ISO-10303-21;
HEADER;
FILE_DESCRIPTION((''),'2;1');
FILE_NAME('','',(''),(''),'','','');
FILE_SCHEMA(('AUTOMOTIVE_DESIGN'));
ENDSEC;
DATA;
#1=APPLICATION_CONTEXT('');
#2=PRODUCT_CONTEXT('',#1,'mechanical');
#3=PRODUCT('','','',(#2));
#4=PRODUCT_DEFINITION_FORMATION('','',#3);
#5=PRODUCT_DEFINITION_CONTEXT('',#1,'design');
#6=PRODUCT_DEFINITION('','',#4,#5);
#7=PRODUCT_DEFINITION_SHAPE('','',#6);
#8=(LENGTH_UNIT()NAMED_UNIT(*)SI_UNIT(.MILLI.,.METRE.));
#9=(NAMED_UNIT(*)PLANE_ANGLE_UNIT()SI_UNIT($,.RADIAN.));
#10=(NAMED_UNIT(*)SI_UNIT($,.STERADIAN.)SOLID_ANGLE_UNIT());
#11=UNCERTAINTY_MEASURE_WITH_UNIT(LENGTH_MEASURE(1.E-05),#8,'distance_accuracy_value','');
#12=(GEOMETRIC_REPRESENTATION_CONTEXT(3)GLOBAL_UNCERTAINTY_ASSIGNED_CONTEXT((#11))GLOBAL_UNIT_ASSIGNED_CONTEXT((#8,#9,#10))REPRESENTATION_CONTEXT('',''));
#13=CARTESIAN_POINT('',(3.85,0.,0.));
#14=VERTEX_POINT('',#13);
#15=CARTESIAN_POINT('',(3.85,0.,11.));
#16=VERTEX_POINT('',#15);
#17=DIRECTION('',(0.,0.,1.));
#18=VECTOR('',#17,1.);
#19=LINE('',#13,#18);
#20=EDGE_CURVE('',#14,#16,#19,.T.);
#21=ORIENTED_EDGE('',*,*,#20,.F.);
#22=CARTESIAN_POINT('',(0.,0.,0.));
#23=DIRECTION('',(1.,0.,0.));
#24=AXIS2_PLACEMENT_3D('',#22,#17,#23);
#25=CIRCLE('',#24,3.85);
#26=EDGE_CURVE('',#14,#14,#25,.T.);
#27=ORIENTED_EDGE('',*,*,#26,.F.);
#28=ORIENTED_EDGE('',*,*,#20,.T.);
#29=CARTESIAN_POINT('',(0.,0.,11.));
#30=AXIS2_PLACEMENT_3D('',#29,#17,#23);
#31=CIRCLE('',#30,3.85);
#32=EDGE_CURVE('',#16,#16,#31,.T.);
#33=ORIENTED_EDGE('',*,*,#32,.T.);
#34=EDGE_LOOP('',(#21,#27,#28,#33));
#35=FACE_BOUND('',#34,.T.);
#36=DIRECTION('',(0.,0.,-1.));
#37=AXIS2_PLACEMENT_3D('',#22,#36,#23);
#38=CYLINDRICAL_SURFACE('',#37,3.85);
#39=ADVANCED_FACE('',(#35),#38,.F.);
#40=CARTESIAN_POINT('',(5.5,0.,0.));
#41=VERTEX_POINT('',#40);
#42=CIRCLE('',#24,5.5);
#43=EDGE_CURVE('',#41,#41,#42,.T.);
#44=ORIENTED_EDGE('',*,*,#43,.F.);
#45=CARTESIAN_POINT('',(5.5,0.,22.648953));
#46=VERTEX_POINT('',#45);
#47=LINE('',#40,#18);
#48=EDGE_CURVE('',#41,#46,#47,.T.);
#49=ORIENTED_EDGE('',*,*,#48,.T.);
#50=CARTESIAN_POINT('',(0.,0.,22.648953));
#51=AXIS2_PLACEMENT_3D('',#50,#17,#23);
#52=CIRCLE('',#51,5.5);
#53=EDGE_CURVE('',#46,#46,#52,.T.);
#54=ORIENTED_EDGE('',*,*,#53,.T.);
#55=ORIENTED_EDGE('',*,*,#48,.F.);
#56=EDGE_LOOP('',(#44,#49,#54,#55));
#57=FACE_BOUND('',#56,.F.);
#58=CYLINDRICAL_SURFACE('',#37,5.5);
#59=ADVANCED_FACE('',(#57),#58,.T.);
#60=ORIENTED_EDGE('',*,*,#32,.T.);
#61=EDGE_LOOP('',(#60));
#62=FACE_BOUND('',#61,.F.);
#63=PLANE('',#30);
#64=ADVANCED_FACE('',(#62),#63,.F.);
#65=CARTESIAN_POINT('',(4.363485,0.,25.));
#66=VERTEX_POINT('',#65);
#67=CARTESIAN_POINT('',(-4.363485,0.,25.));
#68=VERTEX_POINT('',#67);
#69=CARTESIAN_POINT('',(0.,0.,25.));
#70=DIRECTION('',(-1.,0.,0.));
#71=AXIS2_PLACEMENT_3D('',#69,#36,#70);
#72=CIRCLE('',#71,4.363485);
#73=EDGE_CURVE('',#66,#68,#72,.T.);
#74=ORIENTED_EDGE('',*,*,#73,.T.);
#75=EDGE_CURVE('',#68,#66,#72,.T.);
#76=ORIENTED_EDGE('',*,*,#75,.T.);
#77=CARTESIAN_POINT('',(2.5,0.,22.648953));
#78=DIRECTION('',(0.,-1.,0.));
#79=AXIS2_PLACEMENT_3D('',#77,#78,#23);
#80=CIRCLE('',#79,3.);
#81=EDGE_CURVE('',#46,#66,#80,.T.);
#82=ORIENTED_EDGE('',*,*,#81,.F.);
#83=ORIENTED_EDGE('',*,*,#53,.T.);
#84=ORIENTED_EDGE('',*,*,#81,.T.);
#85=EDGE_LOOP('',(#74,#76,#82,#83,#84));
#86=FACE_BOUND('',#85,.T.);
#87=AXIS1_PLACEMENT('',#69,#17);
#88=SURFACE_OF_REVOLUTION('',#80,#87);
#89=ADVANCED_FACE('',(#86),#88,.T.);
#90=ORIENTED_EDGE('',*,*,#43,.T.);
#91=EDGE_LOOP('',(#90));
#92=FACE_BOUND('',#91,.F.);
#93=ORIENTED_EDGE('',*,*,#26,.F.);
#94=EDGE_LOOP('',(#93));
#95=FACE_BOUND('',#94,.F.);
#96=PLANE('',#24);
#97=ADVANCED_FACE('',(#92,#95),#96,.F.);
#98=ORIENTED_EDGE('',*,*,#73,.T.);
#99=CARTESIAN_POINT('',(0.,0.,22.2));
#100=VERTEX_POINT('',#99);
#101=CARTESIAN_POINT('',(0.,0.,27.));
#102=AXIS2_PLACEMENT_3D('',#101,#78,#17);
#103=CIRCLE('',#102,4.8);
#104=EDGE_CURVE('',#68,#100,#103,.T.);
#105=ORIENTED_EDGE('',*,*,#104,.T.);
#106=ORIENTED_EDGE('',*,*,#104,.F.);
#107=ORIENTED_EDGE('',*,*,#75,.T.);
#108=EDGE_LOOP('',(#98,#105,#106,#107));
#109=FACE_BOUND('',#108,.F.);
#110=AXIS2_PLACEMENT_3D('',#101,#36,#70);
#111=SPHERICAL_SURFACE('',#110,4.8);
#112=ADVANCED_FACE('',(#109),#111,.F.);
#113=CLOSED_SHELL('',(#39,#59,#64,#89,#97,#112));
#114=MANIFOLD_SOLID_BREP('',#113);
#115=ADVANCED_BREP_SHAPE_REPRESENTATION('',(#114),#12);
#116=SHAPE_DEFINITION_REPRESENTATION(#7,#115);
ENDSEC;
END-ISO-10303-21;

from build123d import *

# Parameters (mm, degrees)
F0_R     = 5.5
F0_R_2   = 3.85
F1_DEPTH = 25
F2_START = 11
F2_DEPTH = 14


# Not quite as in the source:
# - a fillet or chamfer that OpenCascade refuses, or shapes differently, is made with other operations: its cross-section is extruded or revolved along the edge and cut away or added


with BuildPart() as f1:
    # F0 (on Top) → F1 (new body)
    with BuildSketch(Plane.XY):
        Circle(F0_R)
        Circle(F0_R_2, mode=Mode.SUBTRACT)
    extrude(amount=F1_DEPTH)

    # F0 (on Top) → F2 (join)
    with BuildSketch(Plane.XY.offset(F2_START)):
        Circle(F0_R_2)
    extrude(amount=F2_DEPTH)

    # F3 (on Front) → F4 (revolve, cut)
    with BuildSketch(Plane.XZ):
        with BuildLine():
            Line((0, 22.2), (0, 31.8))
            ThreePointArc((0, 31.8), (-4.8, 27), (0, 22.2))
        make_face()
    revolve(axis=Axis((0, 0, 27), (0, 0, -1)), mode=Mode.SUBTRACT)

    # F5: fillet of radius 3 on 1 edges, made by hand

    # F5_s1 → F5_t2 (revolve, cut)
    with BuildSketch(Plane.XZ):
        with BuildLine():
            ThreePointArc((5.5, 22.6489525251), (5.2009678393, 23.9546219822), (4.3634848459, 25))
            Line((4.3634848459, 25), (5.5, 25))
            Line((5.5, 25), (5.5, 22.6489525251))
        make_face()
    revolve(axis=Axis((0, 0, 25), (0, 0, 1)), mode=Mode.SUBTRACT)


solid = f1.part
